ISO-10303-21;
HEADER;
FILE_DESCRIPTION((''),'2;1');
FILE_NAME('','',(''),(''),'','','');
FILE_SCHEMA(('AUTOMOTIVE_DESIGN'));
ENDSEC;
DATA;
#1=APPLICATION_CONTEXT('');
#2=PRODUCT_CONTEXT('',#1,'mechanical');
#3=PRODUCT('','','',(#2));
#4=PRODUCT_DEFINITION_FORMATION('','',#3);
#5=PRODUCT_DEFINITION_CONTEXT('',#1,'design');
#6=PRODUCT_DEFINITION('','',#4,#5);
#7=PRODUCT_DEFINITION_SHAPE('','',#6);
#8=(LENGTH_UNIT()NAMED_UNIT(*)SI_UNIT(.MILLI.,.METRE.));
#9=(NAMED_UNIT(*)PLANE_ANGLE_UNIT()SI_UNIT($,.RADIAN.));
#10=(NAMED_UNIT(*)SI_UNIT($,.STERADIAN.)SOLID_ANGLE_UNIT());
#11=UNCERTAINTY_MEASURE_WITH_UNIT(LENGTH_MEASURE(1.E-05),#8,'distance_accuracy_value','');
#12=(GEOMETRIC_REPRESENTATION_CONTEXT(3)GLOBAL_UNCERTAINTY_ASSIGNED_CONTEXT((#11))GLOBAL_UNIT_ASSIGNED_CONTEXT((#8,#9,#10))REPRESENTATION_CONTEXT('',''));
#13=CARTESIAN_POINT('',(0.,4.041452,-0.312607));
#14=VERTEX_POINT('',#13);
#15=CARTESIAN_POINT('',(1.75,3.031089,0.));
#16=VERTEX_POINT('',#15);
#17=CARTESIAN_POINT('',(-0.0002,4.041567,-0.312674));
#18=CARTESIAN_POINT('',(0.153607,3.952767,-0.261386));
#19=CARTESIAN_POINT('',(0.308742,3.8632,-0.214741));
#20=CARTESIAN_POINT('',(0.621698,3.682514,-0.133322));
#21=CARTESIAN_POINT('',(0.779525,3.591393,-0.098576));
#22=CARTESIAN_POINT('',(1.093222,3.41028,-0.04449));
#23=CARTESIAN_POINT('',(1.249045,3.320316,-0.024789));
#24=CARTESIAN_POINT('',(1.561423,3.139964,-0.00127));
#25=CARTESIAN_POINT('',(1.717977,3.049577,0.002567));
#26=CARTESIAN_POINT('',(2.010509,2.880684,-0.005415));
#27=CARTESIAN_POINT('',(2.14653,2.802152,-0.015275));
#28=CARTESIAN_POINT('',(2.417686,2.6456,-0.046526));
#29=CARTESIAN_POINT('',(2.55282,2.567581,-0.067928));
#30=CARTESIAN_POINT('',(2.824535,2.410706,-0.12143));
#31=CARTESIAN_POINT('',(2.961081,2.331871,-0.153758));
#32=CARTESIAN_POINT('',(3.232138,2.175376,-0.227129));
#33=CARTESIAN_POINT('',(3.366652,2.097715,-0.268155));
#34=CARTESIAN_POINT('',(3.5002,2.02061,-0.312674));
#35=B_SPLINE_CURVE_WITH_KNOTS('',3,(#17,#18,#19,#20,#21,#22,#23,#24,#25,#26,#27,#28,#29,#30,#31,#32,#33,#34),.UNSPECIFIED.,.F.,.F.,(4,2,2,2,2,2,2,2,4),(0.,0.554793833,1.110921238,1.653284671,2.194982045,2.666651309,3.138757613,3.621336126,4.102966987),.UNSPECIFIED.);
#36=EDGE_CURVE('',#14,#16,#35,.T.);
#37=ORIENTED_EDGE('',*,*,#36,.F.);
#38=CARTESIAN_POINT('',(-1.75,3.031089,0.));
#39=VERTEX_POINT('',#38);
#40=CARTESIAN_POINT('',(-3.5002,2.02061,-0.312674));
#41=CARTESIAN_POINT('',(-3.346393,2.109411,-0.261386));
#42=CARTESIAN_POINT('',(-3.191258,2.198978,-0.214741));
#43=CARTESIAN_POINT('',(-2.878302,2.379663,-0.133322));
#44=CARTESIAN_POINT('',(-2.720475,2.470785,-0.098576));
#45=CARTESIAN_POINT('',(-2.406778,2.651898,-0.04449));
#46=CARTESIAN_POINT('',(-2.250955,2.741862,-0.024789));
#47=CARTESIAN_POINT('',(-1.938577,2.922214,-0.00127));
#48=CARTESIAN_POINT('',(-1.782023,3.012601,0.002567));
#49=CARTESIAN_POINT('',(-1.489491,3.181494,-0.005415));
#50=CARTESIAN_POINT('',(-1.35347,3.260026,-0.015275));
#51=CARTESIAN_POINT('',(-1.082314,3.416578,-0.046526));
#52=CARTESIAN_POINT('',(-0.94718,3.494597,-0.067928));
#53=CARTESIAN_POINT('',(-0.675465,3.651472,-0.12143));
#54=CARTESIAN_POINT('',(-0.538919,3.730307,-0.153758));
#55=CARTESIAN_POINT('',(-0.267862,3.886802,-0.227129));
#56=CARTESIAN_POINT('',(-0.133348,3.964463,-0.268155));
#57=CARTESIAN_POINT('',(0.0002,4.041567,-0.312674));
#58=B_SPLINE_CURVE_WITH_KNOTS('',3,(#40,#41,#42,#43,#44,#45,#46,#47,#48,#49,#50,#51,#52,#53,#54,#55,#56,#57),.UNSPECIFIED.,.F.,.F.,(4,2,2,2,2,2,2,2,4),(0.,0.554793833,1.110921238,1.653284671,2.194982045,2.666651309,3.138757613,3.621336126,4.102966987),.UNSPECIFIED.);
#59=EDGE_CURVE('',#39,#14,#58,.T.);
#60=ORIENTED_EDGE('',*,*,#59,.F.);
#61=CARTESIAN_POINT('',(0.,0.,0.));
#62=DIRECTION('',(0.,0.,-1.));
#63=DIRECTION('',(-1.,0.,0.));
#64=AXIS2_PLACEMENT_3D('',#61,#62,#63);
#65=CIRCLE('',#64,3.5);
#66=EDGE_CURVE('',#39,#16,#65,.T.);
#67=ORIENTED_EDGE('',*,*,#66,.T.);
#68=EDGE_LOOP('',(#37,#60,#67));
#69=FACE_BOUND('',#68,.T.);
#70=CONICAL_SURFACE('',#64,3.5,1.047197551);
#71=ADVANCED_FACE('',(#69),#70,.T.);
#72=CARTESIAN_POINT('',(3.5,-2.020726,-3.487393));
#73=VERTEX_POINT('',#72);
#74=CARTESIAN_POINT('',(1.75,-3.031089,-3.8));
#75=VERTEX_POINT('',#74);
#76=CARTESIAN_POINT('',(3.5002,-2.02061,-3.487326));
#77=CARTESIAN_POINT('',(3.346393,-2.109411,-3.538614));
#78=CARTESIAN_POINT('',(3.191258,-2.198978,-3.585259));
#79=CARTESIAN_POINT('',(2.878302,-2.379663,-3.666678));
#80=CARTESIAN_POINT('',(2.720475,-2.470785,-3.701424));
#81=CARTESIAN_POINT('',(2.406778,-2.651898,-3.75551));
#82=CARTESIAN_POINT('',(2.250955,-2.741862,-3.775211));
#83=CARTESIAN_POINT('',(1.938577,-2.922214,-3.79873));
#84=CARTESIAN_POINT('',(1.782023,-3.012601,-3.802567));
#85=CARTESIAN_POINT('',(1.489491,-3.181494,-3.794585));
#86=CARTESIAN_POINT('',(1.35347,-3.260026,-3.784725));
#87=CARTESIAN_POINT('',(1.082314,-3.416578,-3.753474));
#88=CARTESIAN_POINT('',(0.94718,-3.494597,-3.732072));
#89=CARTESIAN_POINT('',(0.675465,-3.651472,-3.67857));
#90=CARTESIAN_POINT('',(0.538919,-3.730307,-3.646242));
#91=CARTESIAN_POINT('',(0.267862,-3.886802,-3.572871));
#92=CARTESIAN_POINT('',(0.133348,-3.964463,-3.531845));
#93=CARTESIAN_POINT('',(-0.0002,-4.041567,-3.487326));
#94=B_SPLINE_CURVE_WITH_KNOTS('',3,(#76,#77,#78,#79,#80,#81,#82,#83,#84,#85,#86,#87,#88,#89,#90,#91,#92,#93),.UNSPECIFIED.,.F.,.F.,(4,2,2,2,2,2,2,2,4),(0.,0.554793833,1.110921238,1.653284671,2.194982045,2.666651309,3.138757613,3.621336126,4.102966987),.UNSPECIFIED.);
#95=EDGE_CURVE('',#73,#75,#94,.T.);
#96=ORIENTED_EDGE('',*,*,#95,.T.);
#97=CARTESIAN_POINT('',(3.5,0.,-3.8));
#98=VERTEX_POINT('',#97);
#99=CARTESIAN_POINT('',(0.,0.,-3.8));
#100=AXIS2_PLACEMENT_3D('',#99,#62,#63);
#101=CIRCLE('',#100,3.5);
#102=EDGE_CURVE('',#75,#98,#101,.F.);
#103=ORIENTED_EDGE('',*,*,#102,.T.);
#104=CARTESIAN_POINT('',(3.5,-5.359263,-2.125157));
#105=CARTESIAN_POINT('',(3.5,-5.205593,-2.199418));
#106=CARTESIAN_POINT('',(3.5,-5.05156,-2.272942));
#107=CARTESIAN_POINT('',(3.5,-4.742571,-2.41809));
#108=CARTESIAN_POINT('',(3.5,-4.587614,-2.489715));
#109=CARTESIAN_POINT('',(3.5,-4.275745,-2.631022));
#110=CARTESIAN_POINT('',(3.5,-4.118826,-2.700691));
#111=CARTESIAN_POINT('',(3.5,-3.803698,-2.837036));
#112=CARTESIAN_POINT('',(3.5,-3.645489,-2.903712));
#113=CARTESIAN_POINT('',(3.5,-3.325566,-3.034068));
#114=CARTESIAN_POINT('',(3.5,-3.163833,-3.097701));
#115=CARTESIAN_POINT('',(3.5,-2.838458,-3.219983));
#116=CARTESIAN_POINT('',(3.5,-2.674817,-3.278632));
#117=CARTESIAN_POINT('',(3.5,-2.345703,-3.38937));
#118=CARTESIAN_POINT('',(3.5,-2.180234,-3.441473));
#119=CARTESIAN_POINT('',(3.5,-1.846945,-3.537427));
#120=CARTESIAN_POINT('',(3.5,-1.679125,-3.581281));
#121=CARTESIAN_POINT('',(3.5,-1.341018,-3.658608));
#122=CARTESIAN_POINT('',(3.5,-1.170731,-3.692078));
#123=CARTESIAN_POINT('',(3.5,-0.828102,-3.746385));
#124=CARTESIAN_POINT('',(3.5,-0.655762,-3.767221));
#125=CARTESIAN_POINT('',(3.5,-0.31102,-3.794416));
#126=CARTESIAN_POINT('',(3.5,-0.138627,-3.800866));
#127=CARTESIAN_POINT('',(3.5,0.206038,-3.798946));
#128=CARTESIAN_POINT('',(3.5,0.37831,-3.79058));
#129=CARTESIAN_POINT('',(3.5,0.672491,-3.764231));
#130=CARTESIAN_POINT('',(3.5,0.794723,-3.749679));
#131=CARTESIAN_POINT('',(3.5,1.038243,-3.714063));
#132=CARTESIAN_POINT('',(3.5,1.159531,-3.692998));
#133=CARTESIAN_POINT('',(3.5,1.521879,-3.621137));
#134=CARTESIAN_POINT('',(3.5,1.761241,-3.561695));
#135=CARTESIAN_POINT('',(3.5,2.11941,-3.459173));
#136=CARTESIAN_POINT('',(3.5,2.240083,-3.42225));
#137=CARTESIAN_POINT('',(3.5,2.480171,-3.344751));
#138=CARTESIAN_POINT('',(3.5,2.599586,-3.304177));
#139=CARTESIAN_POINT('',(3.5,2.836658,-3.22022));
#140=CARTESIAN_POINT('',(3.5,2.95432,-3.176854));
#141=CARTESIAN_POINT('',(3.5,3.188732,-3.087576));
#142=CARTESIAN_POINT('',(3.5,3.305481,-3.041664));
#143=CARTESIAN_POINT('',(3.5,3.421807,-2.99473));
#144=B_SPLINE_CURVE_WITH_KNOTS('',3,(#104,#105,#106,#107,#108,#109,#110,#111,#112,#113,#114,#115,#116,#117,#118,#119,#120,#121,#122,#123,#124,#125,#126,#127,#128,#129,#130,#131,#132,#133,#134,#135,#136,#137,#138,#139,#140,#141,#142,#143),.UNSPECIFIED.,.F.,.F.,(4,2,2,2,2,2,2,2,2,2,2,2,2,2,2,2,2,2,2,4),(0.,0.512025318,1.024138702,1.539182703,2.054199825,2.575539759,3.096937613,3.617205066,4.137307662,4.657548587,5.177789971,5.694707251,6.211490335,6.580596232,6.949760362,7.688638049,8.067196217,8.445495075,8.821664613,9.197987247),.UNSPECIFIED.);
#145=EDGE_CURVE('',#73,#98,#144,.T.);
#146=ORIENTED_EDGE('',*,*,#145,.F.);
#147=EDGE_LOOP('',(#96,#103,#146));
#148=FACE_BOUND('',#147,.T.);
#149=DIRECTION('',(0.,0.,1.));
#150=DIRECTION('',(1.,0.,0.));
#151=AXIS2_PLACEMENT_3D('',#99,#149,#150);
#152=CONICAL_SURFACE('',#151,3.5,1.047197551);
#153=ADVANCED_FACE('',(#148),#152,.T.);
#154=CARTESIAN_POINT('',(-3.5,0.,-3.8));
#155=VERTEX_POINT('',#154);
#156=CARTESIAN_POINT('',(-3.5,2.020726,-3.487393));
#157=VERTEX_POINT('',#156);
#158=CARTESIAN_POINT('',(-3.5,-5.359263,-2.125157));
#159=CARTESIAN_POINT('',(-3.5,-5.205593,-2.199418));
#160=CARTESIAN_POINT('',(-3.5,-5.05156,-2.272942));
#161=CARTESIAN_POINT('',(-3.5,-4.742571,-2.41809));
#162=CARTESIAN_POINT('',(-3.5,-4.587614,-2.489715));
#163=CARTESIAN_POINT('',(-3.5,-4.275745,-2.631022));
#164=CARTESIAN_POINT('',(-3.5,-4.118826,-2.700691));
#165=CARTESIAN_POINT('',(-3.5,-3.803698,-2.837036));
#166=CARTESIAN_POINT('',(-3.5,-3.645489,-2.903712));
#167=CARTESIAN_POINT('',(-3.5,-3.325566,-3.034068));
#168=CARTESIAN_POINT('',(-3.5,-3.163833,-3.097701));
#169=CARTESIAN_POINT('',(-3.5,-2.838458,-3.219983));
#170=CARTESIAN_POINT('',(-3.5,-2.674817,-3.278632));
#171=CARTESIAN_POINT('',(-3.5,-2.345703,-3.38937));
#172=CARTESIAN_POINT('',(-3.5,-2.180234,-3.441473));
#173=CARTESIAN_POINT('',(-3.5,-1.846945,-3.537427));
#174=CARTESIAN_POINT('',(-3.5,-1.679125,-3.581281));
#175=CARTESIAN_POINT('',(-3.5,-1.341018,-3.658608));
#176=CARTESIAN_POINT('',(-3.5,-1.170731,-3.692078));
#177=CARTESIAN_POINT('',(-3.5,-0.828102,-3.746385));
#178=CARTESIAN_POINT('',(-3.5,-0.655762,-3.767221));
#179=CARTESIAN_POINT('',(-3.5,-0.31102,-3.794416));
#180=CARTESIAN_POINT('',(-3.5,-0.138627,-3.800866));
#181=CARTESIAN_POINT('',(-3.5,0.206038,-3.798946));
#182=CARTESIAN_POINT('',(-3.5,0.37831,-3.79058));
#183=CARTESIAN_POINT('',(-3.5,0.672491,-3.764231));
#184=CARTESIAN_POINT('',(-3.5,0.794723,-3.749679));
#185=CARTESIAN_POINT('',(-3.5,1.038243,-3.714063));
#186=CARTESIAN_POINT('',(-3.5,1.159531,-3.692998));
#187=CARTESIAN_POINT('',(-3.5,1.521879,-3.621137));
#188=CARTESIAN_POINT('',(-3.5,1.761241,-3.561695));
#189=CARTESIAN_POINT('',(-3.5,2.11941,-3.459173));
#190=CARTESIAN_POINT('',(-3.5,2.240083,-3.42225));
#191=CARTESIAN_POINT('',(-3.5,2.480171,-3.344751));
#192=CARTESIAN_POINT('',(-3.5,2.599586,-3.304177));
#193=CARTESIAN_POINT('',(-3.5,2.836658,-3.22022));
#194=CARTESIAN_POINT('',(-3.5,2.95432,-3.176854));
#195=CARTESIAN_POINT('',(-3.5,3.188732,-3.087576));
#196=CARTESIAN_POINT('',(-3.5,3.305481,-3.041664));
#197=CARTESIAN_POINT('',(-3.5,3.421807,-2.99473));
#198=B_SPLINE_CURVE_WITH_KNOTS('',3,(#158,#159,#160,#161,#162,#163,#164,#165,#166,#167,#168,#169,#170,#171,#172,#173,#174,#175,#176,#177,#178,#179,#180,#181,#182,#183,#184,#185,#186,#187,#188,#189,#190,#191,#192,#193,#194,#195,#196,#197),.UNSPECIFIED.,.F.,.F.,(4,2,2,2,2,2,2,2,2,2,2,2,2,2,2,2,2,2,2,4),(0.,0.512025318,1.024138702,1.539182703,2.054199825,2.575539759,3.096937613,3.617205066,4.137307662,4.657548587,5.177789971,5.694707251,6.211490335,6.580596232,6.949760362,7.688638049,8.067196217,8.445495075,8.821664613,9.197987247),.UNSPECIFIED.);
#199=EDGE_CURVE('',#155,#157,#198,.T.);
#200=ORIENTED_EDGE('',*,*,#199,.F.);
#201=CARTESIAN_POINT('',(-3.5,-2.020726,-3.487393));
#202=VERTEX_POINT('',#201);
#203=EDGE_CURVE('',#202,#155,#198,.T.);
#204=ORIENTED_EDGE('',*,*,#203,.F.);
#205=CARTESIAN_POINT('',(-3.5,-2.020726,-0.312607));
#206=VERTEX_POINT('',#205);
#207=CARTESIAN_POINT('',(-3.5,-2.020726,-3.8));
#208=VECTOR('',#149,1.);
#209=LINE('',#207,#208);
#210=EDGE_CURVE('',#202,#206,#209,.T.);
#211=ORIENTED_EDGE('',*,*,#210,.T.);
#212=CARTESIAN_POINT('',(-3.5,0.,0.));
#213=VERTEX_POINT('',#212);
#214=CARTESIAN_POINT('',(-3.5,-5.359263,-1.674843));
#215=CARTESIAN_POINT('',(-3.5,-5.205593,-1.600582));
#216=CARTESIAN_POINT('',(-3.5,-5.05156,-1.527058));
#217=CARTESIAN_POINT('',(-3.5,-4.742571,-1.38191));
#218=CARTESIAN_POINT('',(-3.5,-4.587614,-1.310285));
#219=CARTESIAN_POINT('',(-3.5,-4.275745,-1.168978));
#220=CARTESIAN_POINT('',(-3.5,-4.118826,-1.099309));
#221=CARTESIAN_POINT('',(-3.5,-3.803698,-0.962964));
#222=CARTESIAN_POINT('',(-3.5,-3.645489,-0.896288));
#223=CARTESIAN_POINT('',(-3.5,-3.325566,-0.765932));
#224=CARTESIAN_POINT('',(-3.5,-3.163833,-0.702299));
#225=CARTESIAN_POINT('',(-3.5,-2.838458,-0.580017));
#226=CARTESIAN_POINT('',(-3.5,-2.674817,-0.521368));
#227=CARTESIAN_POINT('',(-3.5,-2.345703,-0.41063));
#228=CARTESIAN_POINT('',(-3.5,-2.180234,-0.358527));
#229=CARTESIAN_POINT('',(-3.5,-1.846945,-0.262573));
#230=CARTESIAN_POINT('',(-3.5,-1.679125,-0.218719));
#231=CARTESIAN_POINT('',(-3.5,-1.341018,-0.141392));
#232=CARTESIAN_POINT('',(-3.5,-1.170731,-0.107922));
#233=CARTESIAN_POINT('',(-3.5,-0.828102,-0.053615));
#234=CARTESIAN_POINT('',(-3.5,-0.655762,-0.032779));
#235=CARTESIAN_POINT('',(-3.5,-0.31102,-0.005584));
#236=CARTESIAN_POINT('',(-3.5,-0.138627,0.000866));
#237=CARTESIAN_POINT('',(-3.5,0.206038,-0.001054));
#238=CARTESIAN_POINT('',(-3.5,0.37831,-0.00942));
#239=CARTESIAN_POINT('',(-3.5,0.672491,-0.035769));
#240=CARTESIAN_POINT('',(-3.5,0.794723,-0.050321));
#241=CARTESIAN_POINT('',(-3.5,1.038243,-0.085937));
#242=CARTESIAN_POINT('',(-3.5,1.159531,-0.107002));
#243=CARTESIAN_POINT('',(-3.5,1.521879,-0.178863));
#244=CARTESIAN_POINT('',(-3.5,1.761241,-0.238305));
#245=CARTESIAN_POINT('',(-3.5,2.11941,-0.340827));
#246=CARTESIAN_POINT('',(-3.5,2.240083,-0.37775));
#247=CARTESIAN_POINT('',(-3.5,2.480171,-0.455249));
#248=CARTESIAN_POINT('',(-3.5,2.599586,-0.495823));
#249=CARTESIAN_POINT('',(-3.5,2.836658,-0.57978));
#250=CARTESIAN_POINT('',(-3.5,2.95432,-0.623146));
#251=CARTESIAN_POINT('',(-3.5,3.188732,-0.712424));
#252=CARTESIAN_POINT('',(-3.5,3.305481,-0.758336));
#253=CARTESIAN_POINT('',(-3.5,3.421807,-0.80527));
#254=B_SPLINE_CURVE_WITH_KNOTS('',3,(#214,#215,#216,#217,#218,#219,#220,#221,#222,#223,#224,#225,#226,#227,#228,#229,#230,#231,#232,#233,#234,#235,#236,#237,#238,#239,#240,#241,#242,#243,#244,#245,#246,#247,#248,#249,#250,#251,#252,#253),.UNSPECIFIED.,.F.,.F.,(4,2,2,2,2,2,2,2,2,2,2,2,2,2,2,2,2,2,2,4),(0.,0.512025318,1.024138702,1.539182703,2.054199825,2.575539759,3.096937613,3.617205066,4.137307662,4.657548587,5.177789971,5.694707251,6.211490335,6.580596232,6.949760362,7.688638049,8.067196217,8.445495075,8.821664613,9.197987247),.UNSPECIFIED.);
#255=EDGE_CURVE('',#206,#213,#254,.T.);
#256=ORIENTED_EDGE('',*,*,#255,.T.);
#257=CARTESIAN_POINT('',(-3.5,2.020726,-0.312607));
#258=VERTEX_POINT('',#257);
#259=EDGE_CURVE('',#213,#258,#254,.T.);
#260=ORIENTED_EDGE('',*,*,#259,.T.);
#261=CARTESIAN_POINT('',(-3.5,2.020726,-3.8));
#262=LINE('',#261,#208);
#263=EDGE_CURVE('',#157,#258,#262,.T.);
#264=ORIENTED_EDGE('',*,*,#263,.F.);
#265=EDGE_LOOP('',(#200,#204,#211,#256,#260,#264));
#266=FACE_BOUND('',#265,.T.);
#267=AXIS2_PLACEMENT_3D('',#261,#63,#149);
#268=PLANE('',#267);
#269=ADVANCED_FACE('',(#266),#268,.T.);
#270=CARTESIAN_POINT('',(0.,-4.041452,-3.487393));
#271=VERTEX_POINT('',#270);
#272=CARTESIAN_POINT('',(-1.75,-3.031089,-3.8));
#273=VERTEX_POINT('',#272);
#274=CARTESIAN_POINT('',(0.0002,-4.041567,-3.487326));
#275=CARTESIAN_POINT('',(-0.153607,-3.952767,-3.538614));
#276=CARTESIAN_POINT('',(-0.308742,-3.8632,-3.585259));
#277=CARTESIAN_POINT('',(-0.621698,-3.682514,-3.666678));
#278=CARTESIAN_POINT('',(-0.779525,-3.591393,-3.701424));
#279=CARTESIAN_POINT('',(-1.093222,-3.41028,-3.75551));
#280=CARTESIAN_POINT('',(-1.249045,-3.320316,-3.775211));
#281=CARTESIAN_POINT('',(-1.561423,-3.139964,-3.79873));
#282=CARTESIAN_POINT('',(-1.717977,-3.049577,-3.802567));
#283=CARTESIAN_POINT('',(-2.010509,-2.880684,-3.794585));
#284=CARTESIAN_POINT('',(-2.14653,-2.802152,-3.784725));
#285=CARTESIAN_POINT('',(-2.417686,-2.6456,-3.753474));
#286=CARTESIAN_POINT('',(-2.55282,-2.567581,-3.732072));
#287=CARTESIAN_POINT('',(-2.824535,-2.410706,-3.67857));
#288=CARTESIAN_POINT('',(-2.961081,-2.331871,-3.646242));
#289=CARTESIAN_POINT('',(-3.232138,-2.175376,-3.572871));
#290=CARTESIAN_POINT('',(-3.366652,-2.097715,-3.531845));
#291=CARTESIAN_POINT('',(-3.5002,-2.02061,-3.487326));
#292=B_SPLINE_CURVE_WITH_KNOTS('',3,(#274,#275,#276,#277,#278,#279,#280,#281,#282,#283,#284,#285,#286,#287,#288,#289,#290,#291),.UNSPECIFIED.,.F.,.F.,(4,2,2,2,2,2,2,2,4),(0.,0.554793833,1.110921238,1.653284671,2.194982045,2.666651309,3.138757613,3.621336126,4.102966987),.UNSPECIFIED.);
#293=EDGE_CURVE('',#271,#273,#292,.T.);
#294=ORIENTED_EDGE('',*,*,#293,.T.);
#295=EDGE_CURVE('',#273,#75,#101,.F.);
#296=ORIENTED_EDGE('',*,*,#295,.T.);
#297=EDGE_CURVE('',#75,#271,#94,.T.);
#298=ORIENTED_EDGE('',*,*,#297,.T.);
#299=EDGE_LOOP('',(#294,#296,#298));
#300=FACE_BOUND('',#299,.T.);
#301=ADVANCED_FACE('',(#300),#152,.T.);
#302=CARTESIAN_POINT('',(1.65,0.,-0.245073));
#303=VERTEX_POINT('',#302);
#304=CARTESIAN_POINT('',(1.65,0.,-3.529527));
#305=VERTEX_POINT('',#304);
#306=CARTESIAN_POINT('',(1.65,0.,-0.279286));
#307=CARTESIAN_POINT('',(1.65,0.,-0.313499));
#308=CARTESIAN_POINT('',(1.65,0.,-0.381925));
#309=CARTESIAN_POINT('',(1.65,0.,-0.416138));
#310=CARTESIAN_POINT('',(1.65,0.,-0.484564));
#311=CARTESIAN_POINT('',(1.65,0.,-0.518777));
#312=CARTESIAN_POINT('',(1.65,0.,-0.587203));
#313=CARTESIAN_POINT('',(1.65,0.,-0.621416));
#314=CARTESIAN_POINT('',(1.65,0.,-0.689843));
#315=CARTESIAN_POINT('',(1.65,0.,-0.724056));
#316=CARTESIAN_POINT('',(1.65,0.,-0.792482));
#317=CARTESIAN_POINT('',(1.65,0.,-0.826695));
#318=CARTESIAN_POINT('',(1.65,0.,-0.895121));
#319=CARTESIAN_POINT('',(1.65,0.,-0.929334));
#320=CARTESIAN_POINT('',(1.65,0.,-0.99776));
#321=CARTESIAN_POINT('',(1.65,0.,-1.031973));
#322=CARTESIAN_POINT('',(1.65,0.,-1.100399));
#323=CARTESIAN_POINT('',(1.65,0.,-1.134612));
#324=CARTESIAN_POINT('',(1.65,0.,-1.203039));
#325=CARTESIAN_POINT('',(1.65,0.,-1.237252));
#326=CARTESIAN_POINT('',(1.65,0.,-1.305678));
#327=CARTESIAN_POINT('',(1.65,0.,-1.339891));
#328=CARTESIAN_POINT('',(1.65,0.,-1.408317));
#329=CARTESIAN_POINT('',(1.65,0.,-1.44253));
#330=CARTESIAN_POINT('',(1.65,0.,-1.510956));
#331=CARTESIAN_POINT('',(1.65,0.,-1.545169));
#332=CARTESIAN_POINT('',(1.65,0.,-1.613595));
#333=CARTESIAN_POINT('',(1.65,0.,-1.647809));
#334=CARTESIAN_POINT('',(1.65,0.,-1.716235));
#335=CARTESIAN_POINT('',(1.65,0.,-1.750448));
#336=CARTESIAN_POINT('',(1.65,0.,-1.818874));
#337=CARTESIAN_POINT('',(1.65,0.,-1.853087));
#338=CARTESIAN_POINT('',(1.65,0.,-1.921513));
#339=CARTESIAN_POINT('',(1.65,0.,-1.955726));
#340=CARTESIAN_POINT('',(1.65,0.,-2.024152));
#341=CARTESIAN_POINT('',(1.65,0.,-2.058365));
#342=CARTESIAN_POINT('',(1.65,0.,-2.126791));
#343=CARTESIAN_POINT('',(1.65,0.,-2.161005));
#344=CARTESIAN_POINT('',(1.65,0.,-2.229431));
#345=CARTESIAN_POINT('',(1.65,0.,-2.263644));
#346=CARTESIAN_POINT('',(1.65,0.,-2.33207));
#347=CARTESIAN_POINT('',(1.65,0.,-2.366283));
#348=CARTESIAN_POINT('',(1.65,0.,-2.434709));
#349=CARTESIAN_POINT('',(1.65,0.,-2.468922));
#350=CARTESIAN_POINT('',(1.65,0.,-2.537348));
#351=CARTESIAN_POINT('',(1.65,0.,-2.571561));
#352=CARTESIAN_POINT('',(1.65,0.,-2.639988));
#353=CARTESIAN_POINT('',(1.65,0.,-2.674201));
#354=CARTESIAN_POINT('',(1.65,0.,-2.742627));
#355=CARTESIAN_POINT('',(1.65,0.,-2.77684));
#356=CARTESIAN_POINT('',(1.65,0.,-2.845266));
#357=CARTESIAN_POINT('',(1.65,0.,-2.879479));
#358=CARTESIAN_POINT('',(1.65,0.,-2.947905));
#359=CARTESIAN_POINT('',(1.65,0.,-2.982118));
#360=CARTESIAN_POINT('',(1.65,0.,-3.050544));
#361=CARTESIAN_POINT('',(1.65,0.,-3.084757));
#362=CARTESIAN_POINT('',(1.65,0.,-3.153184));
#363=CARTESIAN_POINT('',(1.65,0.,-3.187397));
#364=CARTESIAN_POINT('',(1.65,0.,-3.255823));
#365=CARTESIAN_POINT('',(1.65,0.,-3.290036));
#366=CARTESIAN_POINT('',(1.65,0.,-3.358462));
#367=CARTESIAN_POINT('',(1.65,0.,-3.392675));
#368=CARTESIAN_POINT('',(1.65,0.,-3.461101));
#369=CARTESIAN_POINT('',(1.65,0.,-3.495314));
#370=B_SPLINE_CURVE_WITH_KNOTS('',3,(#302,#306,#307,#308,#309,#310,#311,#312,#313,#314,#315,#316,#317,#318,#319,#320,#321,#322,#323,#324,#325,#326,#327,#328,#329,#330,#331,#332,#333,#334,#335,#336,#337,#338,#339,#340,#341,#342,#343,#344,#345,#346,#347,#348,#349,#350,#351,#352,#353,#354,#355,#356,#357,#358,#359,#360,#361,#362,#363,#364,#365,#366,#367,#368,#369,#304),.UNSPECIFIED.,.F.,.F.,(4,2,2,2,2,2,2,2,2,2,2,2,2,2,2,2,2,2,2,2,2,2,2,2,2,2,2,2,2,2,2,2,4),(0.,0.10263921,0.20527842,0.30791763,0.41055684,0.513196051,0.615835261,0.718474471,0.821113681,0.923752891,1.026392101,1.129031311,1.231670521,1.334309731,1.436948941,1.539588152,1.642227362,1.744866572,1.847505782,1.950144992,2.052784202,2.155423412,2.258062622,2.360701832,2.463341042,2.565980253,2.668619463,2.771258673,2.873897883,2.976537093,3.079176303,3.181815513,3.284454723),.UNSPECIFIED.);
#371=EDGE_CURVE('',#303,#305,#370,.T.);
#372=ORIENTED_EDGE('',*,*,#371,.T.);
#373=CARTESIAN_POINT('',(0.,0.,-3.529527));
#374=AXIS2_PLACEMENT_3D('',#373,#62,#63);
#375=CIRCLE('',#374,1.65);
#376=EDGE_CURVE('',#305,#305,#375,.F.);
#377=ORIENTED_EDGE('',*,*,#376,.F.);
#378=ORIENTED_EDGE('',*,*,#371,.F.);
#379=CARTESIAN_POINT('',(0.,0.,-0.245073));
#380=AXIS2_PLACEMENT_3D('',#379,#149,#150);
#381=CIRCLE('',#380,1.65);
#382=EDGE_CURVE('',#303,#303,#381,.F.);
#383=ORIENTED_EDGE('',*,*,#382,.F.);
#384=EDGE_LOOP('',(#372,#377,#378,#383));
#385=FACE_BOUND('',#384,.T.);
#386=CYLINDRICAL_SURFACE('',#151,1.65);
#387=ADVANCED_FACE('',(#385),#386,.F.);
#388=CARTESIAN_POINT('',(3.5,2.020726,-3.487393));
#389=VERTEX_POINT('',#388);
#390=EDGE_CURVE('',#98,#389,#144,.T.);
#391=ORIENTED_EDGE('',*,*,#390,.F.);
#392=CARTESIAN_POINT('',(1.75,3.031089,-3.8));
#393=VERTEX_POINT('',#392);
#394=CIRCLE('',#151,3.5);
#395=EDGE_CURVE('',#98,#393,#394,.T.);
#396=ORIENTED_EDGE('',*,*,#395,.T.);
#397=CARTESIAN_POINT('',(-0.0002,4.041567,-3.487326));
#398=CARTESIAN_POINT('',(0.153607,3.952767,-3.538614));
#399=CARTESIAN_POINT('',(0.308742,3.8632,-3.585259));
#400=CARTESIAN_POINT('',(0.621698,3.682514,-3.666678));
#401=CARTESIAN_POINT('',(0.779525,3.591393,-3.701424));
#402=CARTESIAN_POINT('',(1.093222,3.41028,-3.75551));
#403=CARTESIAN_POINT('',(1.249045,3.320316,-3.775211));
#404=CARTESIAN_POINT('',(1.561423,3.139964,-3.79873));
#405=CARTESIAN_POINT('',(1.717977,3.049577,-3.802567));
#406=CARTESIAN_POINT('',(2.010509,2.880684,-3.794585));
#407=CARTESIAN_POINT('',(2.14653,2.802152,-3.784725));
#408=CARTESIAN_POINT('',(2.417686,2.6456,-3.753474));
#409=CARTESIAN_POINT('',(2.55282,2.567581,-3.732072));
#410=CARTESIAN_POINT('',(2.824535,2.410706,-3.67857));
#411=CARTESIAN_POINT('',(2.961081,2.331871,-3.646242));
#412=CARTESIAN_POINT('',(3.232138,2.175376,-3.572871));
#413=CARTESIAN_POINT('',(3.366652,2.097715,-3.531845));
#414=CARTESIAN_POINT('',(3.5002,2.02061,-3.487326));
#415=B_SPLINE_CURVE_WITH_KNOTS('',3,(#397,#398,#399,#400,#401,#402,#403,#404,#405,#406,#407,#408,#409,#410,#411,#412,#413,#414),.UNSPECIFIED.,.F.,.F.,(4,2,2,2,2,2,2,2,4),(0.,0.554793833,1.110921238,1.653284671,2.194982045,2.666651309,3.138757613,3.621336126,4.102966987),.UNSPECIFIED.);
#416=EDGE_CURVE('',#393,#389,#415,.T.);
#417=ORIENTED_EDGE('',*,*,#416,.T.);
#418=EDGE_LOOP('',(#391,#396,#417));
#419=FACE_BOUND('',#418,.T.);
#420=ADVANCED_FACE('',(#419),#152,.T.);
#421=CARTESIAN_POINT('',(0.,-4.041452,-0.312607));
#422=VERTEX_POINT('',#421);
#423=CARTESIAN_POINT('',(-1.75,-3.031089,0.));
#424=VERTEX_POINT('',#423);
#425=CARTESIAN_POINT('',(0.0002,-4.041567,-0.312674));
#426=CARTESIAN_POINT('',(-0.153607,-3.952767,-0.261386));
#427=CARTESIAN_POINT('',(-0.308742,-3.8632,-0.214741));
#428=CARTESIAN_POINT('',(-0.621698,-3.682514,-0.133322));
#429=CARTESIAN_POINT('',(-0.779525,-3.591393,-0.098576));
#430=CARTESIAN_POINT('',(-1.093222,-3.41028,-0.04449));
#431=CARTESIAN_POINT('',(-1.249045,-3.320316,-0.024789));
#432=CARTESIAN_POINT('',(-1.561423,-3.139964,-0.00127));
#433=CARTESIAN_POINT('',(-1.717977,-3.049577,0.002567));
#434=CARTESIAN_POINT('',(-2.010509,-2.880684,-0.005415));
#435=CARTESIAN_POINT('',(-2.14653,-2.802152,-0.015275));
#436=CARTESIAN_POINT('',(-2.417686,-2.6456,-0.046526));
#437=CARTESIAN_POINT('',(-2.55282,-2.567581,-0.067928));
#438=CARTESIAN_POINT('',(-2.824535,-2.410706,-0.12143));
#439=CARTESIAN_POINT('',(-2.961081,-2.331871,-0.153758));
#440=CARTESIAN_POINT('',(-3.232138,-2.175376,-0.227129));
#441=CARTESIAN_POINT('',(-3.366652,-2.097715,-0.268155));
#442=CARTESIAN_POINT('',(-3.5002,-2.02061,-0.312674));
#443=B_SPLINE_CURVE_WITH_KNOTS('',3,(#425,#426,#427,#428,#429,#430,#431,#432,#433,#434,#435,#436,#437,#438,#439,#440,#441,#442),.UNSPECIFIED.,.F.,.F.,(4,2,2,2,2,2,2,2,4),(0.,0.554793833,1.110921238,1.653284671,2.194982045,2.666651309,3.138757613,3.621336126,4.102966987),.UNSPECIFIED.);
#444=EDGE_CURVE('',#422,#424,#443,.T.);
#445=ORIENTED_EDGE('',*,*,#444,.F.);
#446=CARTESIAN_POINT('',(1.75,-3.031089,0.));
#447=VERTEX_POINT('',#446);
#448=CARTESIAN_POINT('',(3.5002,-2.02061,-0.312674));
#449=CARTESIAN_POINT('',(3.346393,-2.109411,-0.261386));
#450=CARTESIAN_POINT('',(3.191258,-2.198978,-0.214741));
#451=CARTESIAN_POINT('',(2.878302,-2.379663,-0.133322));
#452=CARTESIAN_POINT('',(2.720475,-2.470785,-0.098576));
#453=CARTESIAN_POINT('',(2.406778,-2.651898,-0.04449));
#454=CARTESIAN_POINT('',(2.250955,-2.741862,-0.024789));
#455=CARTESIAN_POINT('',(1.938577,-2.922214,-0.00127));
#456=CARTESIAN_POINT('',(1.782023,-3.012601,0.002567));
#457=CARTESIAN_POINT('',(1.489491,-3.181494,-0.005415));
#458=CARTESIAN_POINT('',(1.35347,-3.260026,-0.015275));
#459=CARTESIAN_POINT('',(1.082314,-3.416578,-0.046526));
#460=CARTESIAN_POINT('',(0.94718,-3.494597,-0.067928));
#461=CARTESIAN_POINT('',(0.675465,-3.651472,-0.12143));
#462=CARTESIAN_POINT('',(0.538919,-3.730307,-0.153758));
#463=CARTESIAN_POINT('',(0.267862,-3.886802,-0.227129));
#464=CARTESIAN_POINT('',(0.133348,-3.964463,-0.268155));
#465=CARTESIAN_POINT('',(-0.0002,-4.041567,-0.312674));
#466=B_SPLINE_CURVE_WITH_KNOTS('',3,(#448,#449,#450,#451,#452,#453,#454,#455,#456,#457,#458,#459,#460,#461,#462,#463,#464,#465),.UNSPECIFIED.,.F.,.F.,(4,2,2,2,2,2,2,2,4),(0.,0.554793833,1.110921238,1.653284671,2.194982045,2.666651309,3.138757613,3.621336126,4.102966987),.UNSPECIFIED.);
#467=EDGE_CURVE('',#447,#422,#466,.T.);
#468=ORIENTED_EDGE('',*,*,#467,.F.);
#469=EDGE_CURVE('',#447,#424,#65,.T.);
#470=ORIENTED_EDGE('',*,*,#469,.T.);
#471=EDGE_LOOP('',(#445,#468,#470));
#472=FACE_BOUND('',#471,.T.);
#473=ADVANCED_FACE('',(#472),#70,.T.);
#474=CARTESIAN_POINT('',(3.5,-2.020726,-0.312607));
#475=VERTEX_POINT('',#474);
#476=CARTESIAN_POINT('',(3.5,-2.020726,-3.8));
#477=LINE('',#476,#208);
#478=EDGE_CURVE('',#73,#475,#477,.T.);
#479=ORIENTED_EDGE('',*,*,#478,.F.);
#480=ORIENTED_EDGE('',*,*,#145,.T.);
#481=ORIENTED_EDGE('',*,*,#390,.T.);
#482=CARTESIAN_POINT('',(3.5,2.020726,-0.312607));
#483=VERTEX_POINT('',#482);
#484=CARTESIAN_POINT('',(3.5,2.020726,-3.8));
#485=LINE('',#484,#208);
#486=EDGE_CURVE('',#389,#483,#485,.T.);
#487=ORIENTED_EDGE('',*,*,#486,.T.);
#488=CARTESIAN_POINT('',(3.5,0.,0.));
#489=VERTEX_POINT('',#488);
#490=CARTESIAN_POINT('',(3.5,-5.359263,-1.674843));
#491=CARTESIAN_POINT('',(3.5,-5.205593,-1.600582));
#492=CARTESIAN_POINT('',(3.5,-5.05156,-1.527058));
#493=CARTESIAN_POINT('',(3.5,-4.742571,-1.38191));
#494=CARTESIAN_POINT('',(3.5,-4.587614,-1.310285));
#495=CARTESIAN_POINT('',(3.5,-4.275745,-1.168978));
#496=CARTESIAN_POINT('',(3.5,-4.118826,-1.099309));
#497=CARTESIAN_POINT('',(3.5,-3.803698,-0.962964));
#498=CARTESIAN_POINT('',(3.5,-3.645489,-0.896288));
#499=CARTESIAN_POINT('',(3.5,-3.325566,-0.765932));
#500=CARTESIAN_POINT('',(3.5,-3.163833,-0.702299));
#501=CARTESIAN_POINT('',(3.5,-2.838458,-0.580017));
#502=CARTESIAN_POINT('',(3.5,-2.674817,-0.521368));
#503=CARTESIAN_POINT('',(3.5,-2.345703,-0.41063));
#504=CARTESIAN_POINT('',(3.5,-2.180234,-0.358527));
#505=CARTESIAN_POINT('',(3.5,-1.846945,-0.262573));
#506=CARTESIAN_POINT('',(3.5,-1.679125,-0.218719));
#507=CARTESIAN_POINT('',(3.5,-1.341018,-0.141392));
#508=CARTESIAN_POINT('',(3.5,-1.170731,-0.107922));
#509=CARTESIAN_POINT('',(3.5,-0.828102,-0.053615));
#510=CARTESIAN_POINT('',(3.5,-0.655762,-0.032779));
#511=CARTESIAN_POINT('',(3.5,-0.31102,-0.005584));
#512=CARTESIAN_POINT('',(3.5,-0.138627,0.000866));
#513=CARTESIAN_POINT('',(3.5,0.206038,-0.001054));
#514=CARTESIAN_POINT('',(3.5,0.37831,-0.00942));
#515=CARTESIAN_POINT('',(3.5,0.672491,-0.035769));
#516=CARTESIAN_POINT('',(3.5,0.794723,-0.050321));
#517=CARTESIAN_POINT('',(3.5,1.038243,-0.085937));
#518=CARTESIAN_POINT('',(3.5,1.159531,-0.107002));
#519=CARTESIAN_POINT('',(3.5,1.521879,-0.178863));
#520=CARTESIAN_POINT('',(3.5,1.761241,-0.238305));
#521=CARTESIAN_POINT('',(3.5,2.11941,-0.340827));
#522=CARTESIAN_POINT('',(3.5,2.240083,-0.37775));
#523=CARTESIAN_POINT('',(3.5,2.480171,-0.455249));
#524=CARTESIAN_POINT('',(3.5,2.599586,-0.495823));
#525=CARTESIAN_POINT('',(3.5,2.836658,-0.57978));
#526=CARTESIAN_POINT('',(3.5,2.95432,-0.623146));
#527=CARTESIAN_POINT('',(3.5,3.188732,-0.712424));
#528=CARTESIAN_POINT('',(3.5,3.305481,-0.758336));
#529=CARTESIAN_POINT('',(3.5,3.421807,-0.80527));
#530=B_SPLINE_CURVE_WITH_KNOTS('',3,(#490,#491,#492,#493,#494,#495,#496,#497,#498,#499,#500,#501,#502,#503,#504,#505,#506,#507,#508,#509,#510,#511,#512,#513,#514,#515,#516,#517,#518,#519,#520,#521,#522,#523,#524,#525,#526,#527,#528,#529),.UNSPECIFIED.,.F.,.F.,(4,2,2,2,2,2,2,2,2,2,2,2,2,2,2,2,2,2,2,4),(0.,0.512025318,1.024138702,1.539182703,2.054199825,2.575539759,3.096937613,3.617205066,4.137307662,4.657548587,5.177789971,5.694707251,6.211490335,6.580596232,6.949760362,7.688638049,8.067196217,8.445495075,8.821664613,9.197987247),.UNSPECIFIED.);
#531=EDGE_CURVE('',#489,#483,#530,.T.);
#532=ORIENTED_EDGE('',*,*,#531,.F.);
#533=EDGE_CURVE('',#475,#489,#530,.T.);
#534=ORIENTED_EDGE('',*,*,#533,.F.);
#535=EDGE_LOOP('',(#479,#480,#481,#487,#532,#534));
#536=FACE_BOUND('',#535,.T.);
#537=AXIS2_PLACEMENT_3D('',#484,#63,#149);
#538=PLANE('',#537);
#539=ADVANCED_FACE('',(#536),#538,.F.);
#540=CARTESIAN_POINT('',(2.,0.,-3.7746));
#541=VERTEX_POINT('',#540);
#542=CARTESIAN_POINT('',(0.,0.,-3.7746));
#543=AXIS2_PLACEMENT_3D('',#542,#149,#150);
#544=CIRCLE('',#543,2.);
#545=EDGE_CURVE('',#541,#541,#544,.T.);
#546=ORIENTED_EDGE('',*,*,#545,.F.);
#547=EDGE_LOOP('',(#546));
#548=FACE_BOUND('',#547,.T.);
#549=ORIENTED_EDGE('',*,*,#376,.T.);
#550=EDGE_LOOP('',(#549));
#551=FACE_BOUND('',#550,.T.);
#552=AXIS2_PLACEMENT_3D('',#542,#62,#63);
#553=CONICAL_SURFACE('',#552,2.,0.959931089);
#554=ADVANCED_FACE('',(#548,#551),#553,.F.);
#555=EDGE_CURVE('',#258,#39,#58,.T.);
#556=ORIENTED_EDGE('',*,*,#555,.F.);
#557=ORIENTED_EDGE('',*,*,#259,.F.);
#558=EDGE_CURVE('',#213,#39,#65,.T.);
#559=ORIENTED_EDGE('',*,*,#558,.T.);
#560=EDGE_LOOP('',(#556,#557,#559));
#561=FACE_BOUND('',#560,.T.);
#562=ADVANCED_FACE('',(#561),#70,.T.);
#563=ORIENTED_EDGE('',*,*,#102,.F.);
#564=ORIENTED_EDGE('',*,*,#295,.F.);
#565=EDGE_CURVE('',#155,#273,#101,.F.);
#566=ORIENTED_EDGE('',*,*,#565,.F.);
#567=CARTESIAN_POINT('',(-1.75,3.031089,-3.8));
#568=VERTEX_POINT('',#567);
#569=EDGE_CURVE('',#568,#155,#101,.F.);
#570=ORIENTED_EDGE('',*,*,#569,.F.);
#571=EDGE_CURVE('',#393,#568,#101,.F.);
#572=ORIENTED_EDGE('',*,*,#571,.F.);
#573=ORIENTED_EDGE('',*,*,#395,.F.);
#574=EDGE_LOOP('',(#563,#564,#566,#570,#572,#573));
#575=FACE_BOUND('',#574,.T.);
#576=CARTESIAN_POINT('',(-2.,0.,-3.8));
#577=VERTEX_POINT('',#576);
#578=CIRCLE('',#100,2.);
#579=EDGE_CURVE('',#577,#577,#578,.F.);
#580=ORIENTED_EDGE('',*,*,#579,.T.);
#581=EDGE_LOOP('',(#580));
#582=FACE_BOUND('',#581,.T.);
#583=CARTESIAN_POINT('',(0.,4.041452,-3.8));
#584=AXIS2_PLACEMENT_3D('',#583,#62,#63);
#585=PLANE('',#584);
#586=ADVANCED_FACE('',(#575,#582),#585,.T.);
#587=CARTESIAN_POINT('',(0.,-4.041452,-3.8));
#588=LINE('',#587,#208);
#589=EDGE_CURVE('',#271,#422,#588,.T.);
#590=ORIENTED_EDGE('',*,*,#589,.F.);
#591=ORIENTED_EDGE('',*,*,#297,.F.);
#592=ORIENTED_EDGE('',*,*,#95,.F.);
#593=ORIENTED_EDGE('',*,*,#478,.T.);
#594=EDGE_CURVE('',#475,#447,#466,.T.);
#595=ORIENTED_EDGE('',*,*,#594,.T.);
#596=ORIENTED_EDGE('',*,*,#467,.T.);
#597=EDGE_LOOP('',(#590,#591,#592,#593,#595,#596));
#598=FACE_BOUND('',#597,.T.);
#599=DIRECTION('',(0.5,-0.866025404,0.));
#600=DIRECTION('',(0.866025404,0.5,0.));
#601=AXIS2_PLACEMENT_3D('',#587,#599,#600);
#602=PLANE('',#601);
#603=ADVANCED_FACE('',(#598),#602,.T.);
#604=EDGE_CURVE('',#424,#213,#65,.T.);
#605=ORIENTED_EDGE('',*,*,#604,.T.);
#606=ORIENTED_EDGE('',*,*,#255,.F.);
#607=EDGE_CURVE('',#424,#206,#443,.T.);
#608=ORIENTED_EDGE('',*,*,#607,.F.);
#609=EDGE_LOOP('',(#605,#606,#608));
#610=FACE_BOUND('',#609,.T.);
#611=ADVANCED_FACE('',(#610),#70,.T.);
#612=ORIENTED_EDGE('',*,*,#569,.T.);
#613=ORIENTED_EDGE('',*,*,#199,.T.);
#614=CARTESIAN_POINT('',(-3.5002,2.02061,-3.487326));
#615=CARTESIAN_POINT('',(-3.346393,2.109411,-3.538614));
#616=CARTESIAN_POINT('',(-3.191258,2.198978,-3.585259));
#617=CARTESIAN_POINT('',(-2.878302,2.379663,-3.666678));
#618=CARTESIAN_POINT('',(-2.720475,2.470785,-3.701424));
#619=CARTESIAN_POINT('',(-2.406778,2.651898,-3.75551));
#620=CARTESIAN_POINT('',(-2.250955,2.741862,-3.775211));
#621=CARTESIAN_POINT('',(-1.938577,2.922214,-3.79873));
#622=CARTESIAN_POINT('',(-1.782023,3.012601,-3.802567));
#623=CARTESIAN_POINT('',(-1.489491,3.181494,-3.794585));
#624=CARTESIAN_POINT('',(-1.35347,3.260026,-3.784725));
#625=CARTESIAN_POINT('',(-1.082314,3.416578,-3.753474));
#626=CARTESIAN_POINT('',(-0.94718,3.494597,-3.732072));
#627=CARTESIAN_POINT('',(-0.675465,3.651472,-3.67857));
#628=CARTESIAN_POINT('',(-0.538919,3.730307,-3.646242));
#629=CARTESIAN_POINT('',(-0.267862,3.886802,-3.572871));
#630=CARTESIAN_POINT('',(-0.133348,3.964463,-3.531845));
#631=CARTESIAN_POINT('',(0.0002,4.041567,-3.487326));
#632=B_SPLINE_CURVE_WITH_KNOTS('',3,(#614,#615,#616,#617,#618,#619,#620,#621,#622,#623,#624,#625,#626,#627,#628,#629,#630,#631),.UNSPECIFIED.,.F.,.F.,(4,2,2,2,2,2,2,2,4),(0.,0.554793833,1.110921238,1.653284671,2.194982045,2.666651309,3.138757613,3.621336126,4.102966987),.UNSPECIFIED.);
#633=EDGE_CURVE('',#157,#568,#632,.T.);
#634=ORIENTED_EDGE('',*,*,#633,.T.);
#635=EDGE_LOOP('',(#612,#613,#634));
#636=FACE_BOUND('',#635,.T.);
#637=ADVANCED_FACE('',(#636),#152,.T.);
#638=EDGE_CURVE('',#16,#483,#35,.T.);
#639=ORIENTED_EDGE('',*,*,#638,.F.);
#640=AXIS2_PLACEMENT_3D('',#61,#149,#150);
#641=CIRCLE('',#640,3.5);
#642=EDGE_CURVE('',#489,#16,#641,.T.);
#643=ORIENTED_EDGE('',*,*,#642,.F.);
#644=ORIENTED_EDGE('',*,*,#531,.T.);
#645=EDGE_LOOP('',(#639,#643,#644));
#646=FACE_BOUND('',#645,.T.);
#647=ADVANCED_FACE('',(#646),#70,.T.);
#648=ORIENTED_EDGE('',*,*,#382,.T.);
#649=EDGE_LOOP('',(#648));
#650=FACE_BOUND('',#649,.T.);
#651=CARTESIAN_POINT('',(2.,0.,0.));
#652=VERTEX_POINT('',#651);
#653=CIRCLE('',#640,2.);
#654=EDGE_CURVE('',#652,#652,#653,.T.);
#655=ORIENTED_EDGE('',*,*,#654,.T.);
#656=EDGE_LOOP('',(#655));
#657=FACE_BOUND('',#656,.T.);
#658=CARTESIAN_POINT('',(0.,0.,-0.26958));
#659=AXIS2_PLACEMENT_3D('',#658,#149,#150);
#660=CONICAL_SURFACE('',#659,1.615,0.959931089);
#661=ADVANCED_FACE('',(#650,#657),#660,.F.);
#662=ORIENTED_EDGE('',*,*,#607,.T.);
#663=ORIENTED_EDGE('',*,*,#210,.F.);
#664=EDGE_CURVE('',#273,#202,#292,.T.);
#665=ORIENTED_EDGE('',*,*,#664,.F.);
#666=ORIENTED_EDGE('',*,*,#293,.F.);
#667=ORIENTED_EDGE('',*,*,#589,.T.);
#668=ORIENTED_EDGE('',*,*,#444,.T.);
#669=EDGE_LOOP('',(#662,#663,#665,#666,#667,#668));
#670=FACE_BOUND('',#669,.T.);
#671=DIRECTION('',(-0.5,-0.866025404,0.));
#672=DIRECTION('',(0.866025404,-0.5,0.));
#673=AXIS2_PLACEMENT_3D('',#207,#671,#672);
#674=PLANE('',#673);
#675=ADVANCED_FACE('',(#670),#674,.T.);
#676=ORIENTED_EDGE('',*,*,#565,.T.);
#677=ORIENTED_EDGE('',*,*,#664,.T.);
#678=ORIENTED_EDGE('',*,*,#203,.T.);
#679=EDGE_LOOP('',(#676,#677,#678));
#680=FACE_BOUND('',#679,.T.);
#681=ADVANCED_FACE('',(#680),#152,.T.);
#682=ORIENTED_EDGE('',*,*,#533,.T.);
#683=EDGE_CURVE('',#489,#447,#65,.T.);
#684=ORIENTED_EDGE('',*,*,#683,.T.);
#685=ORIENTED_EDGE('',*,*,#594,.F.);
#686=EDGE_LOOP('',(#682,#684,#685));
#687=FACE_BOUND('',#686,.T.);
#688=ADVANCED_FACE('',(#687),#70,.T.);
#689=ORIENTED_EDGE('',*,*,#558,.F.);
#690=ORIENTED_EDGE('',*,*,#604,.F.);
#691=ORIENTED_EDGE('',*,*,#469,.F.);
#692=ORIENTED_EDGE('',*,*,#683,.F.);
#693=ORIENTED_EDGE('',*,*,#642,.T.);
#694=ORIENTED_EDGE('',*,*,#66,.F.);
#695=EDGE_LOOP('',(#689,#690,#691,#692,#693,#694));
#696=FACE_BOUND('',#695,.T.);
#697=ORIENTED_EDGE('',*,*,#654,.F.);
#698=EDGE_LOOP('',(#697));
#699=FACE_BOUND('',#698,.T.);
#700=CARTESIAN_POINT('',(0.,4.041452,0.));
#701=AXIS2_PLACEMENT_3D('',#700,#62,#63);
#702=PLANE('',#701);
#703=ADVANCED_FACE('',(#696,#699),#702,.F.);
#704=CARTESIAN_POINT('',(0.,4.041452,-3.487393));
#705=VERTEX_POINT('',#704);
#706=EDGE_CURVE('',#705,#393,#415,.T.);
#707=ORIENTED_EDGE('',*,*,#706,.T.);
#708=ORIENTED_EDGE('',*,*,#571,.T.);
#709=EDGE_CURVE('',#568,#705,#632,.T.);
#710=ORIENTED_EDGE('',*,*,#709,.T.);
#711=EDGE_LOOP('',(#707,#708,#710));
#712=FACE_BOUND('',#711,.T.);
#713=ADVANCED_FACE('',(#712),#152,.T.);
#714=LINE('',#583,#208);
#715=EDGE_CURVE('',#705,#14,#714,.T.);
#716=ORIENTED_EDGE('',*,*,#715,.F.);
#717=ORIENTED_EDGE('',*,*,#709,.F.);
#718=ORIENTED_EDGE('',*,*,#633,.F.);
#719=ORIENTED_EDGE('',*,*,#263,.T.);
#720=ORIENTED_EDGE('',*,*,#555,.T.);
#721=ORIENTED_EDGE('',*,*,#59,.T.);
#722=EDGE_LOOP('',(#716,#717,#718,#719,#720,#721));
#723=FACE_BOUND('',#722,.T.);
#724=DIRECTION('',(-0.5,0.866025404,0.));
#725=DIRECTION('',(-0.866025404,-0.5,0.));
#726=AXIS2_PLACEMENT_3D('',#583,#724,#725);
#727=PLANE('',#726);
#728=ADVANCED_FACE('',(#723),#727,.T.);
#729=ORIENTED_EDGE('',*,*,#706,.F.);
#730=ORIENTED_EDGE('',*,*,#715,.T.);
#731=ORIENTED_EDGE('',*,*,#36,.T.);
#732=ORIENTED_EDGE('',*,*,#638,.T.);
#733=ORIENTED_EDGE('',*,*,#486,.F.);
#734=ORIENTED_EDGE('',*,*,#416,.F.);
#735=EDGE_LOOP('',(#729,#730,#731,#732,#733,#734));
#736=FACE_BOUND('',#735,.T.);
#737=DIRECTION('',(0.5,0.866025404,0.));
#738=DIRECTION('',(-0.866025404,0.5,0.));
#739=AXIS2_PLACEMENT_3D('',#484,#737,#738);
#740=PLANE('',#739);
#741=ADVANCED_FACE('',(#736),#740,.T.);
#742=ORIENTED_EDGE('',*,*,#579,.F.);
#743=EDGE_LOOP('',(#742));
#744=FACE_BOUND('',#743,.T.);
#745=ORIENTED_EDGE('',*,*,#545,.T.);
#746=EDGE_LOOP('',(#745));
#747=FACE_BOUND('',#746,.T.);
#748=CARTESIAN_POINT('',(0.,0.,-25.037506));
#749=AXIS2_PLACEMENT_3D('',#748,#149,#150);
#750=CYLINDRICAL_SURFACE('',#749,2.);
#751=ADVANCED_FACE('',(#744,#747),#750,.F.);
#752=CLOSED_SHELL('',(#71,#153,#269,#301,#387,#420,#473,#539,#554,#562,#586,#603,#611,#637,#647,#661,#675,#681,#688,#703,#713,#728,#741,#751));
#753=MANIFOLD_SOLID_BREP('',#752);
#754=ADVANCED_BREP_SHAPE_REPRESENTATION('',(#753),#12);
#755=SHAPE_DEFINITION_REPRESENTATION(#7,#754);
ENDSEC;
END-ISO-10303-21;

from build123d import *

# Parameters (mm, degrees)
BASENUT_START = -3.8
BASENUTSKE_R  = 1.65
BASENUT_DEPTH = 3.8


# Read off the part's stored shape, not the designer's step: ThreadSchematic
with BuildPart() as part:
    # BaseNutSke → BaseNut (new body)
    with BuildSketch(Plane.XY.offset(BASENUT_START)):
        Polygon((3.5, 2.020725942), (3.5, -2.020725942), (0, -4.041451884), (-3.5, -2.020725942), (-3.5, 2.020725942), (0, 4.041451884), align=None)
        Circle(BASENUTSKE_R, mode=Mode.SUBTRACT)
    extrude(amount=BASENUT_DEPTH)

    # Sketch5 (on Front Plane) → EndChamfer (revolve, cut)
    with BuildSketch(Plane.XY):
        Polygon((3.7746, 2), (3.505020098, 1.615), (3.8254, 1.615), (3.8254, 2), align=None)
    revolve(axis=Axis((3.7746, 2, 0), (-0.5735764363510478, -0.8191520442889905, 0)), mode=Mode.SUBTRACT)

    # Sketch3 → Double-Chamfer (revolve, cut)
    with BuildSketch(Plane(origin=(0, 0, 0), x_dir=(0, 0, -1), z_dir=(1, 0, 0))):
        Polygon((3.8, 3.5), (3.487392609, 4.041451884), (3.487392609, 14.041451884), (13.8, 14.041451884), (13.8, 3.5), align=None)
        Polygon((0.312607391, 14.041451884), (-10, 14.041451884), (-10, 3.5), (0, 3.5), (0.312607391, 4.041451884), align=None)
    revolve(axis=Axis((0, 0, 0), (0, 0, -1)), mode=Mode.SUBTRACT)

    # ThreadSchematic outline → ThreadSchematic (revolve, cut)
    with BuildSketch(Plane.XZ):
        Polygon((1.65, 0), (1.65, -0.245072638), (2, 0), align=None)
        Polygon((2, -3.7746), (1.65, -3.529527362), (1.65, -3.8), (2, -3.8), align=None)
    revolve(axis=Axis((0, 0, 0), (0, 0, 1)), mode=Mode.SUBTRACT)


solid = part.part
